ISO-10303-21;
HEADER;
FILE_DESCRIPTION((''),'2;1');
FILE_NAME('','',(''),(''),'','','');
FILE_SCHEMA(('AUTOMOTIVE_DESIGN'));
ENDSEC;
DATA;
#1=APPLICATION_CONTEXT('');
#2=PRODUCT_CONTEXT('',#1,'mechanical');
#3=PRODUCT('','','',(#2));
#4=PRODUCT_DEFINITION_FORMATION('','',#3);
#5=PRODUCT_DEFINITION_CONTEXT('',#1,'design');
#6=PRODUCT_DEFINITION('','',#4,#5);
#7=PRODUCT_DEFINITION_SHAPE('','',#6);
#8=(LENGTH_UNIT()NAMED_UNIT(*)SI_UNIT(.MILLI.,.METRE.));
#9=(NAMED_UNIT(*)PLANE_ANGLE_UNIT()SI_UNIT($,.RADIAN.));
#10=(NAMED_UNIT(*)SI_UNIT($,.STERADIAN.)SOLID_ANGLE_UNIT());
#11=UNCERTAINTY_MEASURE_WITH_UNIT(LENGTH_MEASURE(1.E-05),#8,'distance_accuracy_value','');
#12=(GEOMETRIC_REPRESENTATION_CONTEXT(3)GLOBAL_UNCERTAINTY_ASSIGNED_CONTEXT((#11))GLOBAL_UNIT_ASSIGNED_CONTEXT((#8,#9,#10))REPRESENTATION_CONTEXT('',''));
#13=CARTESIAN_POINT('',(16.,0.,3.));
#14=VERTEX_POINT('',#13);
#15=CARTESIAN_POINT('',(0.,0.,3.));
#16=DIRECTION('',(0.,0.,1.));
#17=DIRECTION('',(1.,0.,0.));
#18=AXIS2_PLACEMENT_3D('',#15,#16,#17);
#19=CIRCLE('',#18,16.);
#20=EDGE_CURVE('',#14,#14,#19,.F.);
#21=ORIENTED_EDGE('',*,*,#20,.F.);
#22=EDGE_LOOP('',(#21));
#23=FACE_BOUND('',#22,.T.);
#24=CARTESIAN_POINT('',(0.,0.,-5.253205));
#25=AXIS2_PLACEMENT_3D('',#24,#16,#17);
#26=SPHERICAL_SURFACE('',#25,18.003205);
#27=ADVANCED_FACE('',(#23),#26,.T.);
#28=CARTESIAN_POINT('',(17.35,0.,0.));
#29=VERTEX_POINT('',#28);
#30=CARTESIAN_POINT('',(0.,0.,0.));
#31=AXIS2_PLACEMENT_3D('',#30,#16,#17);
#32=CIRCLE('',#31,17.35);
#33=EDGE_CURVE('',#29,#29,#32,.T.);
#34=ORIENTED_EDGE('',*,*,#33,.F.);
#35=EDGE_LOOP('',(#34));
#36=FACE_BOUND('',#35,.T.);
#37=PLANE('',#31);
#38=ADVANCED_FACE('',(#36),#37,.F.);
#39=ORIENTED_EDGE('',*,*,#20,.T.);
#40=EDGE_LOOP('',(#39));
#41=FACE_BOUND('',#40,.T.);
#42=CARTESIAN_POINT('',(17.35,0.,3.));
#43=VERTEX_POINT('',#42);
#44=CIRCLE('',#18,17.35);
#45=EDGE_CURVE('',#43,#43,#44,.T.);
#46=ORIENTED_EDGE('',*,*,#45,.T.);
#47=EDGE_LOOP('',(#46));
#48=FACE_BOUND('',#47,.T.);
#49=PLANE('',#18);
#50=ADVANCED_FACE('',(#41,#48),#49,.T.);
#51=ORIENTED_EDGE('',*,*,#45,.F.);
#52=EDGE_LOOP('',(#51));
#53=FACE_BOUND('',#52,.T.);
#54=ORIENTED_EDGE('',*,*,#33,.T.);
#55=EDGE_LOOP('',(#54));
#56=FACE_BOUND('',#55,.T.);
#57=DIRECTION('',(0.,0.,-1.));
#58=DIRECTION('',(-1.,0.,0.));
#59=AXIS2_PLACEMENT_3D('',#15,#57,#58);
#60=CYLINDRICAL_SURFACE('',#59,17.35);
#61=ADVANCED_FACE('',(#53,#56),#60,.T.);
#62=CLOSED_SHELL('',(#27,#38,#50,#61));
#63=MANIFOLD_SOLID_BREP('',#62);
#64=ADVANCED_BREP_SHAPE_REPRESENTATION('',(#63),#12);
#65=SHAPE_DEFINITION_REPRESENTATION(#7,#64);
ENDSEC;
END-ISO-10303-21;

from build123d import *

# Parameters (mm, degrees)
SKETCH_1_R      = 17.35
EXTRUDE_1_DEPTH = 3


# Read off the part's stored shape, not the designer's step: 圓頂1
with BuildPart() as part:
    # 草圖1 → 填料-伸長1 (new body)
    with BuildSketch(Plane.XY):
        Circle(SKETCH_1_R)
    extrude(amount=EXTRUDE_1_DEPTH)

    # 圓頂1 outline → 圓頂1 (revolve)
    with BuildSketch(Plane.XZ):
        with BuildLine():
            Line((0, 3), (16.000000008, 2.999999984))
            ThreePointArc((16.000000008, 2.999999984), (9.368330969, 10.120466188), (0, 12.75))
            Line((0, 12.75), (0, 3))
        make_face()
    revolve(axis=Axis((0, 0, 0), (0, 0, 1)))


solid = part.part
